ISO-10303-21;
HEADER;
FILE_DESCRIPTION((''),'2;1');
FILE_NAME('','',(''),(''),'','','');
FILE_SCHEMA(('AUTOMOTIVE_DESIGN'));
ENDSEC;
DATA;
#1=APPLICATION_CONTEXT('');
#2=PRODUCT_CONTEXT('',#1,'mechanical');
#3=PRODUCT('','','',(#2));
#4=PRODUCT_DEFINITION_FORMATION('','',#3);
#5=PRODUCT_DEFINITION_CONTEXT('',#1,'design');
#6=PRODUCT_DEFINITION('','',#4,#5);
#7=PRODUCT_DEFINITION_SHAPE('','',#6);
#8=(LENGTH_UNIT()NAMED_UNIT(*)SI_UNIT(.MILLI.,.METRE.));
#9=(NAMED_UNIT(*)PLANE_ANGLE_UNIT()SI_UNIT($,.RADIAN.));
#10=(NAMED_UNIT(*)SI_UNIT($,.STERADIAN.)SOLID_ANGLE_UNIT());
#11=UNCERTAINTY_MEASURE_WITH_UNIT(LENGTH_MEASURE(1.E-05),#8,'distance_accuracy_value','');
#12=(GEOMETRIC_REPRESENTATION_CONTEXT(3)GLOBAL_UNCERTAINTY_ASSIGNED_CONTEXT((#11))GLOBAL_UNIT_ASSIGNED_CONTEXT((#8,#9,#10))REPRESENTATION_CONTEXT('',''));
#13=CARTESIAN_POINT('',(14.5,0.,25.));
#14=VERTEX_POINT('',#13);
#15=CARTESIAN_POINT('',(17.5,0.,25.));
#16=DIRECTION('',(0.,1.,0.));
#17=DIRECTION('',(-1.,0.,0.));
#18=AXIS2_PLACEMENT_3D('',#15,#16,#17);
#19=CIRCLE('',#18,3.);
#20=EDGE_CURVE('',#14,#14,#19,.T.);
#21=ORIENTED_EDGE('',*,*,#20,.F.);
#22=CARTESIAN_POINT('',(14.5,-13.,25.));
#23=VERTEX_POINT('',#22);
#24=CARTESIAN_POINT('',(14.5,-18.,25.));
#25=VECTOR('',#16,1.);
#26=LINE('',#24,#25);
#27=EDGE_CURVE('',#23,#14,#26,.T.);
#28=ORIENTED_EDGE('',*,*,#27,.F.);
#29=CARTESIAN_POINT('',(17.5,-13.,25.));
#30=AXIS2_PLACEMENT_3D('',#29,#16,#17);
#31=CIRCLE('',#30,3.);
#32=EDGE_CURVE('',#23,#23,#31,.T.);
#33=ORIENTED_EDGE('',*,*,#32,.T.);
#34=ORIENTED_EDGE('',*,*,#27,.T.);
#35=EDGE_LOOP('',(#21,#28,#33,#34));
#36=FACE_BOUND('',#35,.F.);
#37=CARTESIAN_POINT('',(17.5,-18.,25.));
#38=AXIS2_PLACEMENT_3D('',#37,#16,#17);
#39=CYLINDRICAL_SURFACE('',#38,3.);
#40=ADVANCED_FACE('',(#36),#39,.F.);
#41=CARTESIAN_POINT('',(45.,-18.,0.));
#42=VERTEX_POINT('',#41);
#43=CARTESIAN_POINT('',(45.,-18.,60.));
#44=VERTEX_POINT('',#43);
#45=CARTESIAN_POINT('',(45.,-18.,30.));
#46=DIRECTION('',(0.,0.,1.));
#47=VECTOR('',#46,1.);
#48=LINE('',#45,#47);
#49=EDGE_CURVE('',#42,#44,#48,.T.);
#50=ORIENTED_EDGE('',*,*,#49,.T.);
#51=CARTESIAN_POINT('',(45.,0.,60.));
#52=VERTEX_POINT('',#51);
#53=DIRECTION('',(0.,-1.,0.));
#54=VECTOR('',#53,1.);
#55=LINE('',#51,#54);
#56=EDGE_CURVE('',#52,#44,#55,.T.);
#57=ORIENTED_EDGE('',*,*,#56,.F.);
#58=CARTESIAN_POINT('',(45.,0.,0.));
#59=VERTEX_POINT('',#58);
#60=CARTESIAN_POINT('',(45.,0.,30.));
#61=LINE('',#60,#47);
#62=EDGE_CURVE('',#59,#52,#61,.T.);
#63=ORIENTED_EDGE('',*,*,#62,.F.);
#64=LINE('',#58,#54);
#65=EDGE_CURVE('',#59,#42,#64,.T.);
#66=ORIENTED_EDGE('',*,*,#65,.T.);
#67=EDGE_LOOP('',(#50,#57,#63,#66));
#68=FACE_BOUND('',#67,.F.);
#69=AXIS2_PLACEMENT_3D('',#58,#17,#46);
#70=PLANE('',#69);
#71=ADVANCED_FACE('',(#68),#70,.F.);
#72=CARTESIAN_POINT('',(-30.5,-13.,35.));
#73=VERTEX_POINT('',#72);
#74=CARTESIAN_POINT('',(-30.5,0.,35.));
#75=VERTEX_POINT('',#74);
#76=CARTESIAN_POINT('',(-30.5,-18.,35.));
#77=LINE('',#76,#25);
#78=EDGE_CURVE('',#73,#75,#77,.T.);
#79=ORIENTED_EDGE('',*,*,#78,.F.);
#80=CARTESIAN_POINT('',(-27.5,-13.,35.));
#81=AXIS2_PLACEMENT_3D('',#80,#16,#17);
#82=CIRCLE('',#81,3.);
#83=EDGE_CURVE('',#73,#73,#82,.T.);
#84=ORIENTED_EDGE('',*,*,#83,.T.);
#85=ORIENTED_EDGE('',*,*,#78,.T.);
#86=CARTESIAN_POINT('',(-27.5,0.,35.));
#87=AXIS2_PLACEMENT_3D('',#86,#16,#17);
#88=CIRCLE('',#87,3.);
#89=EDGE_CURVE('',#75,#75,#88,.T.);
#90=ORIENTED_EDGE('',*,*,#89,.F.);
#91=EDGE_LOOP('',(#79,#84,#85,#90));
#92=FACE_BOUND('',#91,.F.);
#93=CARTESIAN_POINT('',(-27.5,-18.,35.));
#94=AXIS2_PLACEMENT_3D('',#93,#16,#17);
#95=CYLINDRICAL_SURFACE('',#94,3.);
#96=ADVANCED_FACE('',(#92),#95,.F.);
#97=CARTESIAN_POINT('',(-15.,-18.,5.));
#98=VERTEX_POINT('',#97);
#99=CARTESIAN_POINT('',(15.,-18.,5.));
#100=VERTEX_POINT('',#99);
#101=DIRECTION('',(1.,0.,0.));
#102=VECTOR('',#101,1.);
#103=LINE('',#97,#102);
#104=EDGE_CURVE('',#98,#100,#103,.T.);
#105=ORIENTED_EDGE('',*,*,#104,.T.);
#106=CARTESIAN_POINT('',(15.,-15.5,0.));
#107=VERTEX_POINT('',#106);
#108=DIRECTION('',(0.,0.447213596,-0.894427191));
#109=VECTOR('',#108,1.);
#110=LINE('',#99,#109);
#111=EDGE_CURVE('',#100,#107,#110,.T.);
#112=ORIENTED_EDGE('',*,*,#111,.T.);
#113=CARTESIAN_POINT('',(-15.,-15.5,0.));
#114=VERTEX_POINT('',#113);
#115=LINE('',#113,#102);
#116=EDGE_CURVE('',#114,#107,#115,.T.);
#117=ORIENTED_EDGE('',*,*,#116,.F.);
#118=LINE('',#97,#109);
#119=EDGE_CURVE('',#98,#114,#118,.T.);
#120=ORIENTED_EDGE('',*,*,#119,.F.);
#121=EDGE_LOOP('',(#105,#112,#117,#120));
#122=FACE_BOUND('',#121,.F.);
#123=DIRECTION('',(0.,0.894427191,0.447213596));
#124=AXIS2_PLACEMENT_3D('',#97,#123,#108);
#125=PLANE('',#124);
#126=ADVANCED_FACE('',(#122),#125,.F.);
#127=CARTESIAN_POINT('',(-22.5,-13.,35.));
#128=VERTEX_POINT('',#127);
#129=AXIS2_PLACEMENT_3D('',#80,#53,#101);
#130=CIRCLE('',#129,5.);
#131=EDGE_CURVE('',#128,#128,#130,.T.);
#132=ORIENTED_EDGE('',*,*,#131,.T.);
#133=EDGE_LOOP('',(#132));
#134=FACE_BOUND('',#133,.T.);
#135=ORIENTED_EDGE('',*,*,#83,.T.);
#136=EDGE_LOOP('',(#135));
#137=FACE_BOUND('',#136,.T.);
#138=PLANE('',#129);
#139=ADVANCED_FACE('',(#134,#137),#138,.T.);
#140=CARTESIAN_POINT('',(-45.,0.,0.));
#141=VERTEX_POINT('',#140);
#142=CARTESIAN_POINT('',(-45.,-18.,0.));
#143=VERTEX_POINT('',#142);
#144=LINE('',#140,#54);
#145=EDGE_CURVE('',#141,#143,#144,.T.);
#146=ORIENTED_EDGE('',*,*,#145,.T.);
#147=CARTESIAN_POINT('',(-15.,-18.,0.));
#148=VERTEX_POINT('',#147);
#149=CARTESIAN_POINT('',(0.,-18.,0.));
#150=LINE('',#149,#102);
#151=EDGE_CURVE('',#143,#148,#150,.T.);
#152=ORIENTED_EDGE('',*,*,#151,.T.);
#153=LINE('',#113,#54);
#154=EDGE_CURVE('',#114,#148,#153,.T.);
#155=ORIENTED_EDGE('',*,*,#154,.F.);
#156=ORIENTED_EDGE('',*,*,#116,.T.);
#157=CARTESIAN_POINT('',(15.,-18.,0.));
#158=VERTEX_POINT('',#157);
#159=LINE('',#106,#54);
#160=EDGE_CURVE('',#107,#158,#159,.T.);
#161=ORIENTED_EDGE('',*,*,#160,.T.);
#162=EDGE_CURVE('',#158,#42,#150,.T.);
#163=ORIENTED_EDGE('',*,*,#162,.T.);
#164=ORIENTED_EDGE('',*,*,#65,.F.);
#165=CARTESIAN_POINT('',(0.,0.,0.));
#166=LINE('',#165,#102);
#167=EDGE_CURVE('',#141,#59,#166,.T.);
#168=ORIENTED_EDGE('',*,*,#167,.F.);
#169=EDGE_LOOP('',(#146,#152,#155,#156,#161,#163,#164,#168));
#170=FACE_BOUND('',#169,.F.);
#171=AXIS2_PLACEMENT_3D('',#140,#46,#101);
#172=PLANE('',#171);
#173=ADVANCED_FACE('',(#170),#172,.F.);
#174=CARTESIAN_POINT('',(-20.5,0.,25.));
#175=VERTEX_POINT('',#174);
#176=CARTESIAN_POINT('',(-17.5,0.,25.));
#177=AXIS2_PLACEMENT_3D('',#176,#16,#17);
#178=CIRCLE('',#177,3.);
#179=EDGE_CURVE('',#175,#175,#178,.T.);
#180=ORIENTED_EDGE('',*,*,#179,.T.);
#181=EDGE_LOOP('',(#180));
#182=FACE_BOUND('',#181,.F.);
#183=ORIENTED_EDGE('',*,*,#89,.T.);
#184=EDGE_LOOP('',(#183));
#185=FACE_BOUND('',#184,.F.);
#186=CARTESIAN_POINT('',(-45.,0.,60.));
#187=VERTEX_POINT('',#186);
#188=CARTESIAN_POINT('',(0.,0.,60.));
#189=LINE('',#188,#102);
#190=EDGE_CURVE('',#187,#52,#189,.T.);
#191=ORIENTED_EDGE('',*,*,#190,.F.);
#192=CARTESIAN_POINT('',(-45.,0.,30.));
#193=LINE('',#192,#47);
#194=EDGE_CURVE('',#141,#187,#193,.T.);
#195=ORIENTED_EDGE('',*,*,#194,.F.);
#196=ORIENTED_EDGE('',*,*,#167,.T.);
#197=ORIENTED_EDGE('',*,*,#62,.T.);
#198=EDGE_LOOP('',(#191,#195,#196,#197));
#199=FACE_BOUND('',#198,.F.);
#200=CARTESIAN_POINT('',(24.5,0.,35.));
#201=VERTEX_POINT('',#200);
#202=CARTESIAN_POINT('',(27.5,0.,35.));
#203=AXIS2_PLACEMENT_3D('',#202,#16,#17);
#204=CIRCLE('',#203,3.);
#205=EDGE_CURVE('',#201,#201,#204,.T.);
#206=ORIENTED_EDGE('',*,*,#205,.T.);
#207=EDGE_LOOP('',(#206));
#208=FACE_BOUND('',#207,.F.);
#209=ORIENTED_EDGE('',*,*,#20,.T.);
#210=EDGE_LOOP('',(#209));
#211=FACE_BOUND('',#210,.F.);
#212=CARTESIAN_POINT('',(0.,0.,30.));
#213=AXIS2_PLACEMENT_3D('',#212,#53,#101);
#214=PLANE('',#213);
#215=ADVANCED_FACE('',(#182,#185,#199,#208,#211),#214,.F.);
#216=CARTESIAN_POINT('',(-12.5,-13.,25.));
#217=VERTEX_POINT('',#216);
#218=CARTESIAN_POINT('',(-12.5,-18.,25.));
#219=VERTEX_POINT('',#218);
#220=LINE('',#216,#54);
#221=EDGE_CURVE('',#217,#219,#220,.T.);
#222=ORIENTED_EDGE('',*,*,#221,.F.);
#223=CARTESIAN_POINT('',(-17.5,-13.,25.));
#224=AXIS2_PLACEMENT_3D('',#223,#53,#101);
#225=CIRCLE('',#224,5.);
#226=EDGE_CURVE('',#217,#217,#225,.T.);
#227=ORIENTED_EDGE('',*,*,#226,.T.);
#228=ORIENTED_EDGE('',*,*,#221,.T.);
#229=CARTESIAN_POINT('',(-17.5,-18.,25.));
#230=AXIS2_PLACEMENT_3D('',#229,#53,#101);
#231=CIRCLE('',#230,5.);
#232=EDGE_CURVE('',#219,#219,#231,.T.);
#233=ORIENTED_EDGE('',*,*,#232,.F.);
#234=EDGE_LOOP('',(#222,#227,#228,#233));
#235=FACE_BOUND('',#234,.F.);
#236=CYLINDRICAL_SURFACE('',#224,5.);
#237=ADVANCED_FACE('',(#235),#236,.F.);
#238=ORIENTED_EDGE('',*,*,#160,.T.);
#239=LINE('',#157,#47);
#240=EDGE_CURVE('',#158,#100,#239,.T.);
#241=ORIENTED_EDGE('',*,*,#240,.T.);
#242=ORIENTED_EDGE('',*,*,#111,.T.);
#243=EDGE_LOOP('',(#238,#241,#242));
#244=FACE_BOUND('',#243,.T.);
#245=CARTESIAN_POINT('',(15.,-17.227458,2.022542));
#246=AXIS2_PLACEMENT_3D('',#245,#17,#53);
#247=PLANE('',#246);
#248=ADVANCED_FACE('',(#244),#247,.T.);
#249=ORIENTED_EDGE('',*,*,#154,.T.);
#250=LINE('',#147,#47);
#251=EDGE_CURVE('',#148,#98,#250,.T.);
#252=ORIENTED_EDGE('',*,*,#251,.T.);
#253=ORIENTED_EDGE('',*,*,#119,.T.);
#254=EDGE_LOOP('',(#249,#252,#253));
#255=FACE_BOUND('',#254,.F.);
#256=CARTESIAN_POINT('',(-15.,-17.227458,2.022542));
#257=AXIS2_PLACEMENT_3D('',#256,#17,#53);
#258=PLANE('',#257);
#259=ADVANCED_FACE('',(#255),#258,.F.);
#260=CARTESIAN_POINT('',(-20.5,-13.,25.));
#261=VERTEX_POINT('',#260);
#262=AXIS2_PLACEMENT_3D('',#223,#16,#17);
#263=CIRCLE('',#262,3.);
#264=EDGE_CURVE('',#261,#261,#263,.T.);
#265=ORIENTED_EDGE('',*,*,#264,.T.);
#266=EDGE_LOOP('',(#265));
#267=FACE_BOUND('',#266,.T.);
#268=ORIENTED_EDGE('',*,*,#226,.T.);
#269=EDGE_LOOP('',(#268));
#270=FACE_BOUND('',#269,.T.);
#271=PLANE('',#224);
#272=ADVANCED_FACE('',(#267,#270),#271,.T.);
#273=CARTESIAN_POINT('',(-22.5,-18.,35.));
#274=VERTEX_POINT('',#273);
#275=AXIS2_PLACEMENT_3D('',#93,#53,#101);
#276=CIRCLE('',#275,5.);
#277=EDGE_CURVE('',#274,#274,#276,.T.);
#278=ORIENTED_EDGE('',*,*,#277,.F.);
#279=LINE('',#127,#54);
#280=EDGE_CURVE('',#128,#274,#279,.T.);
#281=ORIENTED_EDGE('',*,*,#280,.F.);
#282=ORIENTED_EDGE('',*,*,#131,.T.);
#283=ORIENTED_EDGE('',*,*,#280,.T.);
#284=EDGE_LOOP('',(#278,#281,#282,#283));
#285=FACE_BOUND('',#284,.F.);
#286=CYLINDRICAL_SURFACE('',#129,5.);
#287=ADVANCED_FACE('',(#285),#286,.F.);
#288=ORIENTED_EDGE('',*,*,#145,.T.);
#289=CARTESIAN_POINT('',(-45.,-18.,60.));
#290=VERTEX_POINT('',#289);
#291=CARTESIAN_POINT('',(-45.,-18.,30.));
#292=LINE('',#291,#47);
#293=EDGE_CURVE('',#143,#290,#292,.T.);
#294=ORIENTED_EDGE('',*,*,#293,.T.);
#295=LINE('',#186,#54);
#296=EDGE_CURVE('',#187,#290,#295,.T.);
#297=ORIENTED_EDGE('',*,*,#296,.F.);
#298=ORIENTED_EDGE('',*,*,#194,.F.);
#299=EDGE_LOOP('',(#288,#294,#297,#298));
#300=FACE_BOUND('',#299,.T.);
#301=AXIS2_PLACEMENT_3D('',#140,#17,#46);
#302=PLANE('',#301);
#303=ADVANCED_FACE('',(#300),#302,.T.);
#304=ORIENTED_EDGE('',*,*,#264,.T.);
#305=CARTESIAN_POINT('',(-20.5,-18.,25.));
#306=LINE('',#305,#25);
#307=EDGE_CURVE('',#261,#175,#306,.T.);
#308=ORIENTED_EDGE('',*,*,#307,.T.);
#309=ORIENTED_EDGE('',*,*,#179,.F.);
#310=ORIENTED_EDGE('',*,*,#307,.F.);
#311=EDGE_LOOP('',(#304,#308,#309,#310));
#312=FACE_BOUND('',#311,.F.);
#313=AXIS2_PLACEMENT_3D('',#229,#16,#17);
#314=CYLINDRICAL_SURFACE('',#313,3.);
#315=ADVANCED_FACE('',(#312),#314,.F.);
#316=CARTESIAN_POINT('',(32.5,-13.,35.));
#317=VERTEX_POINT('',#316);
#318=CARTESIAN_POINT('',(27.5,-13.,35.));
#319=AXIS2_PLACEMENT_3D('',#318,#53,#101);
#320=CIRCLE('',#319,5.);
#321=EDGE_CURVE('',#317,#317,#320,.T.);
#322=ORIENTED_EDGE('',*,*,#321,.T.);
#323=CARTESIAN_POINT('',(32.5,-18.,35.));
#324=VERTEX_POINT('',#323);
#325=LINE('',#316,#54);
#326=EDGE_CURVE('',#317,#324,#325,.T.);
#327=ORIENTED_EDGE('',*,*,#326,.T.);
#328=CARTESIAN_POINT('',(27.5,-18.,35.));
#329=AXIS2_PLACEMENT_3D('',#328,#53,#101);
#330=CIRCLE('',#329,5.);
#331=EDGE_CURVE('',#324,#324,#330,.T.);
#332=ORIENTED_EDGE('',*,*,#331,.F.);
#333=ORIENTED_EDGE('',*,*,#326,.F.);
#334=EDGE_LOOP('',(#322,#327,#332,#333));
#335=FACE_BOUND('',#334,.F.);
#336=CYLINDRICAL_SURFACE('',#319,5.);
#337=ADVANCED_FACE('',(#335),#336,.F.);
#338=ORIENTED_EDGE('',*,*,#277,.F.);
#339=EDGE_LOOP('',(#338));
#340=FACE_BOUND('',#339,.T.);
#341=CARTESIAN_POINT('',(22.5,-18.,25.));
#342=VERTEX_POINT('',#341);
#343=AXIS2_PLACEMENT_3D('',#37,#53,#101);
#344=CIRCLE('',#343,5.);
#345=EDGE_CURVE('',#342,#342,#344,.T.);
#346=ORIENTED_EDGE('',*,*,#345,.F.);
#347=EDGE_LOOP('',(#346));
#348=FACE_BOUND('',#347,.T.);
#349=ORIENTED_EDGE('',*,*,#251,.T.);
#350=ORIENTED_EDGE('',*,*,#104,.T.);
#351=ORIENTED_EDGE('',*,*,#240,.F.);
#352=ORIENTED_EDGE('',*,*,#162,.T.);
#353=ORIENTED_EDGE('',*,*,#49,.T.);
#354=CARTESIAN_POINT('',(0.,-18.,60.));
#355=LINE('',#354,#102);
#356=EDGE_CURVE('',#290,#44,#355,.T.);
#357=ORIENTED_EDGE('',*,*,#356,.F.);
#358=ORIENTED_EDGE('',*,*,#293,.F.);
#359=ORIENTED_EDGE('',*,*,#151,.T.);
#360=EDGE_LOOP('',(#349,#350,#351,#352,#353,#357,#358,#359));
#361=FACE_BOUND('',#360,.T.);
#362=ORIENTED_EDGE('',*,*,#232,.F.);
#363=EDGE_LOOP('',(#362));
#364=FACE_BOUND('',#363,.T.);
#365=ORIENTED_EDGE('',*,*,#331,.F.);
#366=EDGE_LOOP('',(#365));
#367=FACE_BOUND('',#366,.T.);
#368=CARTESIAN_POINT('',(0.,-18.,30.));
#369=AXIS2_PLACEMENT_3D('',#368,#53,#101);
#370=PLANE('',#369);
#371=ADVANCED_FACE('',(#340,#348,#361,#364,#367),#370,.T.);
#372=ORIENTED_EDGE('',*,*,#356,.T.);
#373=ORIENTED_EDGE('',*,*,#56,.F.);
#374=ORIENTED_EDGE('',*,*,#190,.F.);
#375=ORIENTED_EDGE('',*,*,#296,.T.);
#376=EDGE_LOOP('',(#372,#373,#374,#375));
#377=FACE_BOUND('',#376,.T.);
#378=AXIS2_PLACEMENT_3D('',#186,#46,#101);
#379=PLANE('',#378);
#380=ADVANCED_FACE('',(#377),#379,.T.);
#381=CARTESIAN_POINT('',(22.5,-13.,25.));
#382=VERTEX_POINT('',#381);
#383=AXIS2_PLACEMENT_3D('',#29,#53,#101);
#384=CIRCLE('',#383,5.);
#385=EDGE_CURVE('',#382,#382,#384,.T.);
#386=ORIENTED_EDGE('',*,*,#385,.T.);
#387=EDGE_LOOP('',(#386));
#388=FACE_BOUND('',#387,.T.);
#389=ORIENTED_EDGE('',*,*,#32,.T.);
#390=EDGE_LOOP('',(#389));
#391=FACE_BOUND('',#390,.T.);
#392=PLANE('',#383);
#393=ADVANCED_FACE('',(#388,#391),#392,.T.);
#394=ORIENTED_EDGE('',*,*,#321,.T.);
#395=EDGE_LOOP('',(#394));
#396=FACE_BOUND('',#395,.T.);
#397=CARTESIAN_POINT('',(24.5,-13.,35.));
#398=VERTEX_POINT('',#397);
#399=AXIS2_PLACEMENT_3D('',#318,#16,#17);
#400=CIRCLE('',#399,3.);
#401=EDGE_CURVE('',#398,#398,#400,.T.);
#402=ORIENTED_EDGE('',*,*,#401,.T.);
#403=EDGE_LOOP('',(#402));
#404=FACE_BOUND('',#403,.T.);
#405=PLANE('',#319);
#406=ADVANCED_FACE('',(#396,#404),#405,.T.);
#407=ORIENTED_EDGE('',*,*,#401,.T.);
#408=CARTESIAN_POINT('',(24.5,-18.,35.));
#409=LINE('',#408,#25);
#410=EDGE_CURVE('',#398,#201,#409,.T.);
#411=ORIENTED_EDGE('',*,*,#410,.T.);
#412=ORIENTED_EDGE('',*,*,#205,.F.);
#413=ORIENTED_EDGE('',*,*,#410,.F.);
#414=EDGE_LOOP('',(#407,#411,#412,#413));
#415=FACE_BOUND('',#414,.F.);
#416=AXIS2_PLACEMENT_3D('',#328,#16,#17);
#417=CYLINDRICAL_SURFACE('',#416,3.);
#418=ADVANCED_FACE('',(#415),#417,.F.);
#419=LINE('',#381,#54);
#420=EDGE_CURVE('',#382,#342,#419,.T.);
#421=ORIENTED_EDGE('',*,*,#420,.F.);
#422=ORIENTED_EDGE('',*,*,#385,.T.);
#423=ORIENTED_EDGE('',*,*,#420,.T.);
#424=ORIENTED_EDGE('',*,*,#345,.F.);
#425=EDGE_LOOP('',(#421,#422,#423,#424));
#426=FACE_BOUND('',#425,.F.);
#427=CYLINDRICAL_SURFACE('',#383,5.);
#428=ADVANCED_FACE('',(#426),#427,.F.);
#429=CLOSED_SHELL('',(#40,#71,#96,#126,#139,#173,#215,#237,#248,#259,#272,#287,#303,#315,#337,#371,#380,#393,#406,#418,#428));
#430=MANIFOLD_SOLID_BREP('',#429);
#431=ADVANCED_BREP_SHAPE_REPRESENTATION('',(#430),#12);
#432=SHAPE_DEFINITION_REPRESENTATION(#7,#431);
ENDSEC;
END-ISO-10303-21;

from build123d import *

# Parameters (mm, degrees)
F0_W           = 90
F0_H           = 60
F1_DEPTH       = 18
F3_D           = 6
F3_CBORE_D     = 10
F3_CBORE_DEPTH = 5
F7_DEPTH       = 30


with BuildPart() as f1:
    # F0 (on Front) → F1 (new body)
    with BuildSketch(Plane.XZ):
        with Locations((0, 30)):
            Rectangle(F0_W, F0_H)
    extrude(amount=F1_DEPTH)

    # F3 (through all)
    with Locations(Plane.XZ.offset(18)):
        with Locations((-27.5, 35), (-17.5, 25), (17.5, 25), (27.5, 35)):
            CounterBoreHole(F3_D / 2, F3_CBORE_D / 2, F3_CBORE_DEPTH)

    # F6 (on offset) → F7 (cut, through all)
    with BuildSketch(Plane(origin=(-15, 0, 0), x_dir=(0, -1, 0), z_dir=(-1, 0, 0))):
        Polygon((15.5, 0), (18, 0), (18, 5), align=None)
    extrude(amount=-F7_DEPTH, mode=Mode.SUBTRACT)


solid = f1.part
